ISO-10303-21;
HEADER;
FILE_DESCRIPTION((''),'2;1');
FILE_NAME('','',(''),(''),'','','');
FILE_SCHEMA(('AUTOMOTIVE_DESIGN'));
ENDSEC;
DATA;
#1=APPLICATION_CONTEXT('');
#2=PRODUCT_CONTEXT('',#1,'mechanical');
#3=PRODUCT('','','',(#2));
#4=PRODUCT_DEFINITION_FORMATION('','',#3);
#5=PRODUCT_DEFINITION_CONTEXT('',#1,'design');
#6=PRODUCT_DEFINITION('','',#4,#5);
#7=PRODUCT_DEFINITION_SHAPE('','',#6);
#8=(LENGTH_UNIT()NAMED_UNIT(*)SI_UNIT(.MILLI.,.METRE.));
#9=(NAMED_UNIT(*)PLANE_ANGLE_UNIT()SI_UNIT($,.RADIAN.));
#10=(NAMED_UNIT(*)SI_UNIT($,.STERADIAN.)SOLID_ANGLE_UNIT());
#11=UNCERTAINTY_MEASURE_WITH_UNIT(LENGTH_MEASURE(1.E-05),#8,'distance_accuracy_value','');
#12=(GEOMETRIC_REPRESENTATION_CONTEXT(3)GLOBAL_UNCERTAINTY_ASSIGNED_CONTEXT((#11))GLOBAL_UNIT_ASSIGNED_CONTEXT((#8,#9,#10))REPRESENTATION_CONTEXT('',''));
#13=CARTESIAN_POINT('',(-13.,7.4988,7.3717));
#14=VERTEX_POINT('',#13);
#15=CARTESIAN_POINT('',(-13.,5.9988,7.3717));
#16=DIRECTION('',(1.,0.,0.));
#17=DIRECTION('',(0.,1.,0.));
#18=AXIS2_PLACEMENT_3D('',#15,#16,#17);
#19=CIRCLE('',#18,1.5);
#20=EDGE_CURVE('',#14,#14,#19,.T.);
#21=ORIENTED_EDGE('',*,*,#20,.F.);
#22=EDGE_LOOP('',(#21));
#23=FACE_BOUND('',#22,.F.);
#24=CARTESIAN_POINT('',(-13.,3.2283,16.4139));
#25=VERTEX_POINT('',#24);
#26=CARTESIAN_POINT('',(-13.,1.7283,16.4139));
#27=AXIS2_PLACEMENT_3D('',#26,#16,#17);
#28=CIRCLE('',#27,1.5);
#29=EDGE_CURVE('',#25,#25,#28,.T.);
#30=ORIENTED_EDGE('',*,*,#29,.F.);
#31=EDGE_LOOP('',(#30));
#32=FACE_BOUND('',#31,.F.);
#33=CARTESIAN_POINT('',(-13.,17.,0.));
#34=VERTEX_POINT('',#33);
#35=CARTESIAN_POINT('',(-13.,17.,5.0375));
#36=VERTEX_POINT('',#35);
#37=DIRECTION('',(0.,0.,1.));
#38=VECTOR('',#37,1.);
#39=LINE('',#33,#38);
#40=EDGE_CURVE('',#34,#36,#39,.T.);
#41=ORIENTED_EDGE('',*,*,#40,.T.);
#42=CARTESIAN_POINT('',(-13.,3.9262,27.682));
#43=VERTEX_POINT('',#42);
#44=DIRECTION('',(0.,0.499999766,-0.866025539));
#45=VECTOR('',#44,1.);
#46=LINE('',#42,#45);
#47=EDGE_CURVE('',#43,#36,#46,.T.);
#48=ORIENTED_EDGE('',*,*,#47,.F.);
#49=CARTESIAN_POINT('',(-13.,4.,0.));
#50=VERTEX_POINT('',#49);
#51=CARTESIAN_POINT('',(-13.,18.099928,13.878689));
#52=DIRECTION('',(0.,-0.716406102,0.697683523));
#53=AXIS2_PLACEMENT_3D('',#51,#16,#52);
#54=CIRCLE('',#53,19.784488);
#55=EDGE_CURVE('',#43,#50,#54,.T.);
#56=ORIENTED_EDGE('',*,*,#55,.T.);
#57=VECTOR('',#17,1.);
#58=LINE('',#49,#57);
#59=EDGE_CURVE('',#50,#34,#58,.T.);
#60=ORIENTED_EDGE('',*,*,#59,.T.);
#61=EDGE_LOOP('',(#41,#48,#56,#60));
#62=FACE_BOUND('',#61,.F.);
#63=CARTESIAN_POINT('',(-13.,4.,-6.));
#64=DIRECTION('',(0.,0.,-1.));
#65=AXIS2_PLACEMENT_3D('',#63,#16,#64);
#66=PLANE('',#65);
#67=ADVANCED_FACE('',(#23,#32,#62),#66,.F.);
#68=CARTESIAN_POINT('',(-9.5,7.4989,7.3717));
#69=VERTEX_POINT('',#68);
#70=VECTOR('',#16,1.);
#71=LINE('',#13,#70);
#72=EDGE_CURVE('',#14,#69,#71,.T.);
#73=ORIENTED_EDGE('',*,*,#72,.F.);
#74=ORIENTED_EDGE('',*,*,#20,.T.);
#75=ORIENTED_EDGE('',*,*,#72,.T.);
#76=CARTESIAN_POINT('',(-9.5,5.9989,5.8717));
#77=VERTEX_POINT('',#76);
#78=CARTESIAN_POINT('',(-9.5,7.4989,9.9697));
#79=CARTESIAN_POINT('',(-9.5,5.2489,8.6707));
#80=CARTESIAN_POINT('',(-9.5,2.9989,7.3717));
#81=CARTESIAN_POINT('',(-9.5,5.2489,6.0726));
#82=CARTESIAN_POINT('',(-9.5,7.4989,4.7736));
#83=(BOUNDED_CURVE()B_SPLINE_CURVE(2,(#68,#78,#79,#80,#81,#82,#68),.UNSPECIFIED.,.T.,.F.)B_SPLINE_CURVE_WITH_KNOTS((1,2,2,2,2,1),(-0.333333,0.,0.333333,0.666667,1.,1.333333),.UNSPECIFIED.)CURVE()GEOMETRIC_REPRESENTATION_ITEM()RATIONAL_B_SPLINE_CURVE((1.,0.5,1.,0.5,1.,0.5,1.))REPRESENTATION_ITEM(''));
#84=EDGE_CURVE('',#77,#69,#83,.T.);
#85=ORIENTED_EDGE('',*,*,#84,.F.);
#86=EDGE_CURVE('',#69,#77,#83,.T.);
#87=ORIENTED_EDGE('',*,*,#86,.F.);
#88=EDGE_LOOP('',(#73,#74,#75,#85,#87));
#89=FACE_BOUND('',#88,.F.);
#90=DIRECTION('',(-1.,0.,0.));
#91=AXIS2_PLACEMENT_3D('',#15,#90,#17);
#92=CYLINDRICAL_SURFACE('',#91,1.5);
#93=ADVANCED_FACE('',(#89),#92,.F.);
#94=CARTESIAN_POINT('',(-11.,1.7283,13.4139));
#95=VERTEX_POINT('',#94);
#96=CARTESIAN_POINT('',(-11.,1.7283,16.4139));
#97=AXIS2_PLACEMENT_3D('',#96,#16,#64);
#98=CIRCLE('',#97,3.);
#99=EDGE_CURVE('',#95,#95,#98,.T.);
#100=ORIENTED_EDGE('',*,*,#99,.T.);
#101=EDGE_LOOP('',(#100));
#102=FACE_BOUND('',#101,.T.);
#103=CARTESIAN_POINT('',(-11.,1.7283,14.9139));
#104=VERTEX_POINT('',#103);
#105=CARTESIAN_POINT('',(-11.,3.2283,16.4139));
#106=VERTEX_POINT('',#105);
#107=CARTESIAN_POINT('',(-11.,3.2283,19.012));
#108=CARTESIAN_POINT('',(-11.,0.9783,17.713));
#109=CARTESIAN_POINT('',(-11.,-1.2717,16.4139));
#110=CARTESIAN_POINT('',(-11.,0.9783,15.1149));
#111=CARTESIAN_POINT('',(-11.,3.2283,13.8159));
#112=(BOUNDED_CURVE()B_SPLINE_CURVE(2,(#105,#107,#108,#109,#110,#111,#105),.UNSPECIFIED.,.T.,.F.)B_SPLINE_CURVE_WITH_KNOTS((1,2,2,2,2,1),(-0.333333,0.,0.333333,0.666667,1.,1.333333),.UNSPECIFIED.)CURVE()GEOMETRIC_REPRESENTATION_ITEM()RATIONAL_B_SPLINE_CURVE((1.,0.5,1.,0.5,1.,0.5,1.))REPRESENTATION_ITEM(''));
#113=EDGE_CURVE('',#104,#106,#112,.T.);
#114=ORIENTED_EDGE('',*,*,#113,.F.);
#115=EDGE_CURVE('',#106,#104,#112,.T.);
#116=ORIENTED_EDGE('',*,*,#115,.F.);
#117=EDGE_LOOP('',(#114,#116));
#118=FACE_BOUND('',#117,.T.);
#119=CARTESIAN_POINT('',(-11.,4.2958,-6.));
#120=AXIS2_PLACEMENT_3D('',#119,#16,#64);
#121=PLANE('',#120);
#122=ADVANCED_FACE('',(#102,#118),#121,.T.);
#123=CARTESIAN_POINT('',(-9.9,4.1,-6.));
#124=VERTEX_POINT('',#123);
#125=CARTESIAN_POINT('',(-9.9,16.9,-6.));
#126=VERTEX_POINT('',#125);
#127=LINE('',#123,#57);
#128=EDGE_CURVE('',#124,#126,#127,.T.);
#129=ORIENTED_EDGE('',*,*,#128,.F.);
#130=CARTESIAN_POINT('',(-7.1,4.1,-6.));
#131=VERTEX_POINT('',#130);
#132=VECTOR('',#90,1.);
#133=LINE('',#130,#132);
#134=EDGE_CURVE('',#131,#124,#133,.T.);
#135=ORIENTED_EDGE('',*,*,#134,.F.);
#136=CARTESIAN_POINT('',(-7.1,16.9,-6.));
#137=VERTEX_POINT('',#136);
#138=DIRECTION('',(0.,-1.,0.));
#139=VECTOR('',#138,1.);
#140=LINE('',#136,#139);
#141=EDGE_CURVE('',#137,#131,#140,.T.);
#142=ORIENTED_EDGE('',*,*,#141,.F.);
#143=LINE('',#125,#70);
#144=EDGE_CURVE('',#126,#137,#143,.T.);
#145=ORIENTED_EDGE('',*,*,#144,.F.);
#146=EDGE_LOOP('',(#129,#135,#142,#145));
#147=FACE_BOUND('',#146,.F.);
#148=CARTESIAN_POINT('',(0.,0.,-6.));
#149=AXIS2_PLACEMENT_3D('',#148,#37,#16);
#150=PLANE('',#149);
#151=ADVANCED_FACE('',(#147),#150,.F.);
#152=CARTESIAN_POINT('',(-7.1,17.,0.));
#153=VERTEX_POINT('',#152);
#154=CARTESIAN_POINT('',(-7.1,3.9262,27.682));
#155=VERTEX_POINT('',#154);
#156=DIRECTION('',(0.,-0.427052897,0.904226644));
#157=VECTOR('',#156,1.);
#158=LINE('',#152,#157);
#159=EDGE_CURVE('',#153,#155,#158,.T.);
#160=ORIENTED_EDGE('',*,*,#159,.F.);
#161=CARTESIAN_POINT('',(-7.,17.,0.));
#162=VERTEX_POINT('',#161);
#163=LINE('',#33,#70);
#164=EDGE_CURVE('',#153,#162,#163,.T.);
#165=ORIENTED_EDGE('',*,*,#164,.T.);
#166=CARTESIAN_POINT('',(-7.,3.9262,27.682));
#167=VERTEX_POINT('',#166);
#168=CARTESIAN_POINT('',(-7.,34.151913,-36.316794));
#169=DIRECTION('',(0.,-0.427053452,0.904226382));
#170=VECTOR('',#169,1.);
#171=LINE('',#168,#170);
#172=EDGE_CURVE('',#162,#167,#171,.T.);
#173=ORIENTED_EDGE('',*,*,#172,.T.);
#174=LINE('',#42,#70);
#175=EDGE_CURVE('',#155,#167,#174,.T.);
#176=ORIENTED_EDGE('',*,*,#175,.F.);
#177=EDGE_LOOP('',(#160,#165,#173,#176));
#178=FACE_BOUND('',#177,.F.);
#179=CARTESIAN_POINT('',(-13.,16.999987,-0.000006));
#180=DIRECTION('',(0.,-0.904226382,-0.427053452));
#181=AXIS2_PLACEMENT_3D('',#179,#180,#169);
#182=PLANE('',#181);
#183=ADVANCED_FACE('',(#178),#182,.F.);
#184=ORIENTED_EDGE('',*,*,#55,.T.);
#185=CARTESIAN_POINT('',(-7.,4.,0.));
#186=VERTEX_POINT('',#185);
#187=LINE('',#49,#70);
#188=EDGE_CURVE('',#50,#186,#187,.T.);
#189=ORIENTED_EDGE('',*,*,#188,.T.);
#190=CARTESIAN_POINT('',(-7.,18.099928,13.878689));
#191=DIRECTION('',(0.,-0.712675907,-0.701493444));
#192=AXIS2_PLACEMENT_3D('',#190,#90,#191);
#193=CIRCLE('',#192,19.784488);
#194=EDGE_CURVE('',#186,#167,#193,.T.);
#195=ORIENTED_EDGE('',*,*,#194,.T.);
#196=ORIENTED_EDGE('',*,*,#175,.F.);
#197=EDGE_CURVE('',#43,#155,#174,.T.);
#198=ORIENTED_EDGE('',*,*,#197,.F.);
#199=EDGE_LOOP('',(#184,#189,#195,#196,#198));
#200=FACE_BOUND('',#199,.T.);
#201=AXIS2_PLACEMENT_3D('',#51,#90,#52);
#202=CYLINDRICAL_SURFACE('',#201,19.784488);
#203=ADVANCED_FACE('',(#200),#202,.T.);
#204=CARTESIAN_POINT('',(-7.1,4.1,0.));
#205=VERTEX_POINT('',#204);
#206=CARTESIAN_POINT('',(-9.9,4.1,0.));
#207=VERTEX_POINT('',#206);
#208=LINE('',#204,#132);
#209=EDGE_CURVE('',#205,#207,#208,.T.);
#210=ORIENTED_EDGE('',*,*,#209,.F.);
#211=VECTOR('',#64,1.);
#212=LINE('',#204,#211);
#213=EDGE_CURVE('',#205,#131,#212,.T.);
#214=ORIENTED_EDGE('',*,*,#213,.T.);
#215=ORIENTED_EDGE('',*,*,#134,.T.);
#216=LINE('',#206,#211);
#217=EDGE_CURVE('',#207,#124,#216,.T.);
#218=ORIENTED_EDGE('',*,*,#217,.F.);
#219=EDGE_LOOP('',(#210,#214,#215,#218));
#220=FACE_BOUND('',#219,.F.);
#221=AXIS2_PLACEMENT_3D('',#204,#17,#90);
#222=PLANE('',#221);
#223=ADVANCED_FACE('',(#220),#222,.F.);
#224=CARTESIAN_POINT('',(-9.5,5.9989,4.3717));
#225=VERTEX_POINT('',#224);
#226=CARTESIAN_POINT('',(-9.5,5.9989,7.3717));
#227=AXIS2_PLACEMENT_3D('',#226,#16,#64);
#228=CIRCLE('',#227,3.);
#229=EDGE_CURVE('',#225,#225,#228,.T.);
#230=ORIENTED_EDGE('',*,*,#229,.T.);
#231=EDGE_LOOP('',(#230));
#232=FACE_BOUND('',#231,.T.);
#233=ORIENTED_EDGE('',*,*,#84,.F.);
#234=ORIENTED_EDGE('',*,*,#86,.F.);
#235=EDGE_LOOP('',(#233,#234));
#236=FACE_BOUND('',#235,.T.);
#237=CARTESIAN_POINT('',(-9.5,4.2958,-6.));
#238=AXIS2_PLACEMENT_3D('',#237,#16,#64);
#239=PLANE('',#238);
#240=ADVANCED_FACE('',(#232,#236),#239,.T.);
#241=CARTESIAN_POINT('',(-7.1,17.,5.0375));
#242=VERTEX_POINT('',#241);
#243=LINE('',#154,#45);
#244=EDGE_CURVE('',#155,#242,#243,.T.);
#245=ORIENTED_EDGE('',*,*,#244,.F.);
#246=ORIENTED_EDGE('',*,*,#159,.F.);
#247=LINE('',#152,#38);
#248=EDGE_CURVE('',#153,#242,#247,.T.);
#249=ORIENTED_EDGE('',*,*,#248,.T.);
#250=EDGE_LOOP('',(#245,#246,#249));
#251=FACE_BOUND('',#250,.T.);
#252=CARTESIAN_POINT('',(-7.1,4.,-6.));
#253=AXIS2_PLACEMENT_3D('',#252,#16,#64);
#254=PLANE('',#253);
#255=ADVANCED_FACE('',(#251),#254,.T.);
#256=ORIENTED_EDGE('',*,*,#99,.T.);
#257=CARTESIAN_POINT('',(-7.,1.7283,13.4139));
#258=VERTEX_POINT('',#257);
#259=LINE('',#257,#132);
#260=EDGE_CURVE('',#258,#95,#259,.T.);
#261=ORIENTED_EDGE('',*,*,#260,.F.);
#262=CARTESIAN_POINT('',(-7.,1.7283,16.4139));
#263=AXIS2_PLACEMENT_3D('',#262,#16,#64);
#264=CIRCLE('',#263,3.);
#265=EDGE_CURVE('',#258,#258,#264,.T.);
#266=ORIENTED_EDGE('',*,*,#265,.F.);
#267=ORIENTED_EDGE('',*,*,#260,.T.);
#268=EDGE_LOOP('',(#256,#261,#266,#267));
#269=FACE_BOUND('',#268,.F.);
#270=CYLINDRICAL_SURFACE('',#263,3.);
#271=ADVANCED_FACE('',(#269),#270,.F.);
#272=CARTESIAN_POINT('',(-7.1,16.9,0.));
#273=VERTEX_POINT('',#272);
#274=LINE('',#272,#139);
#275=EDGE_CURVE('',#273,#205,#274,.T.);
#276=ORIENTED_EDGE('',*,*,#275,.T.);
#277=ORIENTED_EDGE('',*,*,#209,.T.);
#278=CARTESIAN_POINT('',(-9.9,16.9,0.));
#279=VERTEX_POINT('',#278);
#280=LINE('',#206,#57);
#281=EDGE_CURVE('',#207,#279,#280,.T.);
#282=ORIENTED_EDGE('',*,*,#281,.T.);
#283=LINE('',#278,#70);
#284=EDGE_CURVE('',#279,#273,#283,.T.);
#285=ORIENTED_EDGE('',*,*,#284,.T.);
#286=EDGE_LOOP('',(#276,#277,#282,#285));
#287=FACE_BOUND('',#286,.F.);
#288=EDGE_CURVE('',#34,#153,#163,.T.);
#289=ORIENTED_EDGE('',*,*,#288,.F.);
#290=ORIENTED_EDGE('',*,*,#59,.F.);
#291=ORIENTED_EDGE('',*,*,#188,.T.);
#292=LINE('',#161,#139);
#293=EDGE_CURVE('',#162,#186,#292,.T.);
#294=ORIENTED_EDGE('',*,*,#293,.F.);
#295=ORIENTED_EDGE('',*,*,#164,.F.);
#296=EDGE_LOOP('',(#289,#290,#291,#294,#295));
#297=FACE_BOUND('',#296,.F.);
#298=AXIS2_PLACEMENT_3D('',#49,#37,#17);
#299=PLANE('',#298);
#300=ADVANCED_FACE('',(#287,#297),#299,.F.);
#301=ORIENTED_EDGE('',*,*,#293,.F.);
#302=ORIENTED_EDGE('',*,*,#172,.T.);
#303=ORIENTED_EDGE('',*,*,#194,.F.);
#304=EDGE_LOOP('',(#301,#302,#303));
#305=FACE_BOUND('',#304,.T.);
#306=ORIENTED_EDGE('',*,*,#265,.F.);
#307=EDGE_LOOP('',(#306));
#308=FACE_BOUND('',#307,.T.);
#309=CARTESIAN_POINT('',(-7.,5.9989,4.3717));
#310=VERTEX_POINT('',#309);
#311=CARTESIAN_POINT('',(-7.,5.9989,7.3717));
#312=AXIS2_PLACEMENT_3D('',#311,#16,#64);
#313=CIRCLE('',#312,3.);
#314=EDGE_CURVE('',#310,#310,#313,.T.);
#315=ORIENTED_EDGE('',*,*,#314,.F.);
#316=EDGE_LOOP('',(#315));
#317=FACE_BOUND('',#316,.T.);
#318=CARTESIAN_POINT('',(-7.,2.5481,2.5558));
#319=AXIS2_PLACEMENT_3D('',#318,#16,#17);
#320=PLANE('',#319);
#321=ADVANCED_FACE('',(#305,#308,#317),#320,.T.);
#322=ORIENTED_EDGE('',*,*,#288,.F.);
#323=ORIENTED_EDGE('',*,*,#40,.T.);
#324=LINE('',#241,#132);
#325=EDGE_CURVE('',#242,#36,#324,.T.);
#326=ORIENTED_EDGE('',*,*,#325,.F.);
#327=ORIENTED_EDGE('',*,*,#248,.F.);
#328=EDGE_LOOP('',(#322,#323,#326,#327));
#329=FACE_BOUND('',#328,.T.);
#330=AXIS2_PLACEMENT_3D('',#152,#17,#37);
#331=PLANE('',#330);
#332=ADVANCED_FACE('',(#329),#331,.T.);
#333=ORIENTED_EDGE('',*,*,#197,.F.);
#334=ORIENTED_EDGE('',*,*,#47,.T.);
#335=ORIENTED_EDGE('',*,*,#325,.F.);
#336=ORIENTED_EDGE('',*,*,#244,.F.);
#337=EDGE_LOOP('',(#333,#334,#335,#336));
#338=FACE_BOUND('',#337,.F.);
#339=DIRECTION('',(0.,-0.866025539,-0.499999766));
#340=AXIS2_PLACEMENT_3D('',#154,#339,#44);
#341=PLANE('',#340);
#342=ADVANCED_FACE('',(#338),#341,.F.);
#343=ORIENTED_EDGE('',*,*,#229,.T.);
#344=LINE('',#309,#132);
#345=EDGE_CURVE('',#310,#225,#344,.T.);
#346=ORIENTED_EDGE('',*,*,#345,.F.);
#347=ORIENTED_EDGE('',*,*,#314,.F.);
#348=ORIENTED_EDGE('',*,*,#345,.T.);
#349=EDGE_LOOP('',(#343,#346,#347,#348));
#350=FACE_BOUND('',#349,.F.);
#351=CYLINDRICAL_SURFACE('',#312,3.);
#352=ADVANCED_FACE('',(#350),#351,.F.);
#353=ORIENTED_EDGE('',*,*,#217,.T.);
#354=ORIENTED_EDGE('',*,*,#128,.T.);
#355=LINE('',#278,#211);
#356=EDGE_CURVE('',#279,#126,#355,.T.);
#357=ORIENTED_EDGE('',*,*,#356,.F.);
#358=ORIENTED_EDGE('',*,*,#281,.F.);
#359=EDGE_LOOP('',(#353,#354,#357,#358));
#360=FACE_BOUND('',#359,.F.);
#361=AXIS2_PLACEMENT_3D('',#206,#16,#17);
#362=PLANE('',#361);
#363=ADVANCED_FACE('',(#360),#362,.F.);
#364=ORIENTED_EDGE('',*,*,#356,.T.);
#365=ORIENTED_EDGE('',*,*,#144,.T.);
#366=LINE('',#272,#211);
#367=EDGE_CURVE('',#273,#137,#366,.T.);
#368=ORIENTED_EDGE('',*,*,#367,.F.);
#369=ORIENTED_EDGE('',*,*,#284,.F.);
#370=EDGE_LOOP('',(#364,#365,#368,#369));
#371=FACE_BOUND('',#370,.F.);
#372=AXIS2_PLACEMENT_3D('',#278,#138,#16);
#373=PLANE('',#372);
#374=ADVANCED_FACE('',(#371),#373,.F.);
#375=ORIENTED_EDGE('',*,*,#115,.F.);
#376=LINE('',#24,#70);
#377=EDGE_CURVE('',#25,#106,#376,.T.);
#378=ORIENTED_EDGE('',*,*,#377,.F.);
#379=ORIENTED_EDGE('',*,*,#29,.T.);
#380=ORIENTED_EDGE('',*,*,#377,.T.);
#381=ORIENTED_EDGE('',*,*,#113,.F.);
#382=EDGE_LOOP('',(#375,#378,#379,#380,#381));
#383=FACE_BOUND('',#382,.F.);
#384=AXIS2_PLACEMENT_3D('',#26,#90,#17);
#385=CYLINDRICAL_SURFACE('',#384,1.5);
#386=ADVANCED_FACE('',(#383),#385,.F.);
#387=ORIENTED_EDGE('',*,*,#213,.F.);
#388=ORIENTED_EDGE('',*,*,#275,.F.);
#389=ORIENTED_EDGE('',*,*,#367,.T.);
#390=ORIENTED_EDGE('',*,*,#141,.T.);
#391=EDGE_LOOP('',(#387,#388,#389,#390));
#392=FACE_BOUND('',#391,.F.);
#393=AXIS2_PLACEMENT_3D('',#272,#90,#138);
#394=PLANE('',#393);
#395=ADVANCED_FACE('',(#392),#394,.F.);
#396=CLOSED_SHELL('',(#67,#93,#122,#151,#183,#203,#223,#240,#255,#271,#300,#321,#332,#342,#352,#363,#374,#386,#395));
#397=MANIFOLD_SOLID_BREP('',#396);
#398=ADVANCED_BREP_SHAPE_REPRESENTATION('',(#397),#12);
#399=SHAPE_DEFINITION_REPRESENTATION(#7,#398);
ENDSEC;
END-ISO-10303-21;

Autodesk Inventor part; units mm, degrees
sketch "Эскиз1" plane through (0, 0, 0) normal (0, 0, 1) x (1, 0, 0)
  line L0 (-10, 17) -> (-7, 17) projected
  line L1 (-10, 4) -> (-10, 17) projected
  line L2 (-7, 4) -> (-10, 4) projected
  line L3 (-7, 17) -> (-7, 4) projected
  line L4 (-9.9, 4.1) -> (-9.9, 16.9)
  line L5 (-9.9, 16.9) -> (-7.1, 16.9)
  line L6 (-7.1, 16.9) -> (-7.1, 4.1)
  line L7 (-7.1, 4.1) -> (-9.9, 4.1)
  point P0 (0, 0)
  dimension "d22" = 0.1
ref_plane "РабПлоскость1" through (-13, -24, -6) normal (0, 0, -1) x (0, 1, 0)
extrude "Выдавливание1" add sketch "Эскиз1" against normal up to surface (6 mm away) contours L4 L5 L6 L7
ref_plane "РабПлоскость2" through (-13, 2.5481, 2.5558) normal (1, 0, 0) x (0, 1, 0)
sketch "Эскиз3" plane through (-13, 2.5481, 2.5558) normal (1, 0, 0) x (0, 1, 0)
  line L0 (29.663, -39.7893) -> (-15.8657, 56.6115) projected
  line L1 (1.4519, -2.5558) -> (14.4519, -2.5558) projected
  circle A0 centre (3.4507, 4.8159) radius 1.5 projected
  circle A1 centre (-0.8198, 13.8581) radius 1.5 projected
  arc A2 (1.3781, 25.1262) -> (1.4519, -2.5558) centre (15.5518, 11.3229) ccw
  line L2 (31.6038, -38.8726) -> (-13.9249, 57.5281)
  point P0 (-2.5481, -2.5558)
  point P1 (-0.157, 23.3504)
  point P2 (12.0781, -2.5558)
ref_plane "РабПлоскость3" through (-7, 4, -6) normal (-1, 0, 0) x (0, 0, 1)
extrude "Выдавливание3" add sketch "Эскиз3" along normal up to surface (6 mm away)
ref_plane "РабПлоскость5" through (-7, 4.2958, -6) normal (1, 0, 0) x (0, 0, -1)
sketch "Эскиз5" plane through (-7, 4.2958, -6) normal (1, 0, 0) x (0, 0, -1)
  spline S0 degree 2 poles (-13.3717, 3.2031) (-15.9697, 3.2031) (-14.6707, 0.9531) (-13.3717, -1.2969) (-12.0726, 0.9531) (-10.7736, 3.2031) (-13.3717, 3.2031) knots 0 0 0 0.333333 0.333333 0.666667 0.666667 1 1 1 weights 1 0.5 1 0.5 1 0.5 1 projected
  circle A0 centre (-13.3717, 1.7031) radius 3
  circle A1 centre (-13.3717, 1.7031) radius 1.5 projected
  circle A2 centre (-13.3717, 1.7031) radius 1.5 projected
  point P0 (-6, -4.2958)
  point P1 (-23.7703, -3.2081)
  point P2 (-23.7703, -3.2081)
  dimension "d12" = 6
extrude "Выдавливание5" cut sketch "Эскиз5" against normal blind 2.5
ref_plane "РабПлоскость4" through (-7, 4.2958, -6) normal (1, 0, 0) x (0, 0, -1)
sketch "Эскиз6" plane through (-7, 4.2958, -6) normal (1, 0, 0) x (0, 0, -1)
  spline S0 degree 2 poles (-22.4139, -1.0675) (-25.012, -1.0675) (-23.713, -3.3175) (-22.4139, -5.5675) (-21.1149, -3.3175) (-19.8159, -1.0675) (-22.4139, -1.0675) knots 0 0 0 0.333333 0.333333 0.666667 0.666667 1 1 1 weights 1 0.5 1 0.5 1 0.5 1 projected
  circle A0 centre (-22.4139, -2.5675) radius 1.5 projected
  circle A1 centre (-22.4139, -2.5675) radius 3
  point P0 (-6, -4.2958)
  dimension "d16" = 6
extrude "Выдавливание6" cut sketch "Эскиз6" against normal blind 4
sketch "Эскиз7" plane through (-7.1, 4, -6) normal (1, 0, 0) x (0, 0, -1)
  line L0 (-6, 13) -> (0, 13) projected
  line L1 (-6, 13) -> (-33.682, -0.0738) projected
  line L2 (-33.682, -0.0738) -> (-11.0375, 13)
  line L3 (-6, 13) -> (0, 13) projected
  line L4 (-6, 13) -> (-11.0375, 13)
  point P0 (-6, -4)
  dimension "d19" = 30
ref_plane "РабПлоскость6" through (-13, -28.5514, -58.6393) normal (1, 0, 0) x (0, 1, 0)
extrude "Выдавливание7" add sketch "Эскиз7" against normal up to surface (5.9 mm away)
properties part number "ЛЦМК.30000.10.00.04  Переходник"
